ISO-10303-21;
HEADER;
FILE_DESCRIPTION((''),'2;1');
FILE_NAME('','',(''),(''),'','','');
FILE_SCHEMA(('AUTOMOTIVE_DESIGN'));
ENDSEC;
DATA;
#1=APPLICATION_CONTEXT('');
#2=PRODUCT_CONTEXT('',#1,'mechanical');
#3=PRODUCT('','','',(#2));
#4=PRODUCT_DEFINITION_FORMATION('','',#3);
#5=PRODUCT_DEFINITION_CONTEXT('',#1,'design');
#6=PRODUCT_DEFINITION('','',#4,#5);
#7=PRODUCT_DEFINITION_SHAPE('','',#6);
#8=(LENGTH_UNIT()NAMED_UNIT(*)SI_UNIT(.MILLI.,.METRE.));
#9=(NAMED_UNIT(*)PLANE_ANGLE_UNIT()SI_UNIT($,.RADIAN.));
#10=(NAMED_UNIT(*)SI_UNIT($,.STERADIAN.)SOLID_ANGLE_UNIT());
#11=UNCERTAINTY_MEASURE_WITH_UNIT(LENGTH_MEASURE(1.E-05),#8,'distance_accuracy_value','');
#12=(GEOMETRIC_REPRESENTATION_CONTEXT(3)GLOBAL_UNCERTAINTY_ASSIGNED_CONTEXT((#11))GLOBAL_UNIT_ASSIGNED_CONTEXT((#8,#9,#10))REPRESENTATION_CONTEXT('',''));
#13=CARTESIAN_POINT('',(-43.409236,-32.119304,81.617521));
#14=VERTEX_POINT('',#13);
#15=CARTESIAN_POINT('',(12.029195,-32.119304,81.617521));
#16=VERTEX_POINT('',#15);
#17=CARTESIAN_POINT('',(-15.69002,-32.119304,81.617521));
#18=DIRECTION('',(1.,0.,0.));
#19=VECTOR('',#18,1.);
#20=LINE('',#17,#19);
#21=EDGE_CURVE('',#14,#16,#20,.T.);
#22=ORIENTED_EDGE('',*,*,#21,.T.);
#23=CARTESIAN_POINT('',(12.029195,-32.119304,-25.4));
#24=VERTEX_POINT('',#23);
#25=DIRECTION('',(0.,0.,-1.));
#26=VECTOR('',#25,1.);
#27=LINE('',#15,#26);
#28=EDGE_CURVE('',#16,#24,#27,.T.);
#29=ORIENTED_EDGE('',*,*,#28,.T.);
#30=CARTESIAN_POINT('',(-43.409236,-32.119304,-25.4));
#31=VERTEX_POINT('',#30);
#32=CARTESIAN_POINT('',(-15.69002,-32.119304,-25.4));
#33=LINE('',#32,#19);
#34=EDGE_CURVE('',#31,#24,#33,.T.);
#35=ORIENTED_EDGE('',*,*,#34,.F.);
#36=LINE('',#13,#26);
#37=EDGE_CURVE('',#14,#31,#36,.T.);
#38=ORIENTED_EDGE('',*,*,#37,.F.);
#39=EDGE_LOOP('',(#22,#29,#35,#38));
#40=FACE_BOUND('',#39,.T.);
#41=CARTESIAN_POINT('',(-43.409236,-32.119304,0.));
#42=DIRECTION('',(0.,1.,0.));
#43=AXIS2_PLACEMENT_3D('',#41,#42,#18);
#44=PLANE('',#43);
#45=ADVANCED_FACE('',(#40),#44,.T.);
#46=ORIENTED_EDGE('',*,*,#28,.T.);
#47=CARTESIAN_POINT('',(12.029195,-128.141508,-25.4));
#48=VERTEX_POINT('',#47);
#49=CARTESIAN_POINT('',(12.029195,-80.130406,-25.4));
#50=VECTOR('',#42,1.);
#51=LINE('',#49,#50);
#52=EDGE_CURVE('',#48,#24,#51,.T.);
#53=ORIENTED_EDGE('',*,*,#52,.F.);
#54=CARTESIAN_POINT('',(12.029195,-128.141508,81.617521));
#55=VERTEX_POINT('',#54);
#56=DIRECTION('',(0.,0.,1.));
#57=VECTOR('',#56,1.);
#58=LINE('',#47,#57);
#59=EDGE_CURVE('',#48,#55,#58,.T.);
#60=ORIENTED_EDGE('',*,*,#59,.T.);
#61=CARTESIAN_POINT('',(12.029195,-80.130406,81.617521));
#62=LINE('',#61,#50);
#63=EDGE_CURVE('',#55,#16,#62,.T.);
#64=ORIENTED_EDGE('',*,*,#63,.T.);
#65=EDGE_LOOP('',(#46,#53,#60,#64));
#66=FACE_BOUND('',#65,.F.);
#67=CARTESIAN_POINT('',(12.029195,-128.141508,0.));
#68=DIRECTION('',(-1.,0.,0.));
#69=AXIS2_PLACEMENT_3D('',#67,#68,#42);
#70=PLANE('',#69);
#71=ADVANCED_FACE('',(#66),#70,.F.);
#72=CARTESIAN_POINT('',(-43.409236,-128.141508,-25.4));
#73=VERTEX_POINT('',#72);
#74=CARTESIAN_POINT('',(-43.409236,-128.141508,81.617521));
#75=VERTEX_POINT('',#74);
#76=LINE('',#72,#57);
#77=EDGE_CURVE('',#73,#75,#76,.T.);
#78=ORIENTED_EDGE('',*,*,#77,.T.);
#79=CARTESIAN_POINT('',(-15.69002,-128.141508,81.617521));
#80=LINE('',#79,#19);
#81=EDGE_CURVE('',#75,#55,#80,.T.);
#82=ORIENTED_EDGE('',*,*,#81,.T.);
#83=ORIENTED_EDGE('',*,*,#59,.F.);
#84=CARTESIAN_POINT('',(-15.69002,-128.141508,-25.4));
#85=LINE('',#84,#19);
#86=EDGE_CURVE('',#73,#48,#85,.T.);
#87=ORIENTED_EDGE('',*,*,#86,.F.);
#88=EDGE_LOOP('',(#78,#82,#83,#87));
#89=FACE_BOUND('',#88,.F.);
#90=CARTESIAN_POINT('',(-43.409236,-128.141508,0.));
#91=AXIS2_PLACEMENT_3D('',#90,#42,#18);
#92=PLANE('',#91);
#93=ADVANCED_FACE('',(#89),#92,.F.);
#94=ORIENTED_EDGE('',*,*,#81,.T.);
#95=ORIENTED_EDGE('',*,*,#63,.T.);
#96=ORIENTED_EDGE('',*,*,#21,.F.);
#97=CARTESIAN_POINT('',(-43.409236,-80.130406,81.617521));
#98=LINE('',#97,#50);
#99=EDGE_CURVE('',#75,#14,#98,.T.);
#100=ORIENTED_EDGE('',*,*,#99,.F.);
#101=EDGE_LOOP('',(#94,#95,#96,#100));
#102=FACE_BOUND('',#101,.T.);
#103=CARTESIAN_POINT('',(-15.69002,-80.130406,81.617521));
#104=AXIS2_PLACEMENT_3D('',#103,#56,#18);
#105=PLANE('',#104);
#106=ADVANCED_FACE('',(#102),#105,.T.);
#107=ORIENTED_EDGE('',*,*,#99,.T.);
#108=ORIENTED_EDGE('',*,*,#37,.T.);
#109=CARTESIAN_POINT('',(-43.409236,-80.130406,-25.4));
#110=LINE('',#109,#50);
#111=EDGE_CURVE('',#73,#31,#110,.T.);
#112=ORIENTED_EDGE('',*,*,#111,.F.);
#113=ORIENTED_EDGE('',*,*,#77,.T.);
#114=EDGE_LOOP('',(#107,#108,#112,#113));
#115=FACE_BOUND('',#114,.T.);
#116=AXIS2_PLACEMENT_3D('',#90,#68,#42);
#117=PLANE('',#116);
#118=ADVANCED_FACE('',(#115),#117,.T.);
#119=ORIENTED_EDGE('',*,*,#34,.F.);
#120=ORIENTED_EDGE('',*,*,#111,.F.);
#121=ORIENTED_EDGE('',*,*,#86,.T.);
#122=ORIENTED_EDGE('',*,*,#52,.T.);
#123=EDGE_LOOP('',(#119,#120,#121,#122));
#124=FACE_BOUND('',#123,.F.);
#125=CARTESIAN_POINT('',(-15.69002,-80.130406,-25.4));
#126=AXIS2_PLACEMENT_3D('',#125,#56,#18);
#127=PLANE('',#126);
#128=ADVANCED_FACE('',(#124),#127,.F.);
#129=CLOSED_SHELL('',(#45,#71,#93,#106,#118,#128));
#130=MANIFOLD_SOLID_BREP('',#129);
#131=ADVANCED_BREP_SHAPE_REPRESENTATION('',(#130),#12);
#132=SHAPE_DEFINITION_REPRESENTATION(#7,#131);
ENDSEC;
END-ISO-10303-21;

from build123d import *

# Parameters (mm, degrees)
F1_W     = 55.4384309798
F1_H     = 96.0222035646
F2_DEPTH = 25.399999693
F3_DEPTH = 81.6175211221


# Not quite as in the source:
# - a feature names something its author has since deleted; it is built from what else it names


with BuildPart() as f2:
    # F1 (on Top) → F2 (new body)
    with BuildSketch(Plane.XY):
        with Locations((-15.6900202855, -80.130405724)):
            Rectangle(F1_W, F1_H)
    extrude(amount=-F2_DEPTH)

    # F3 (add): a face of the model
    f3_faces = [f2.faces().sort_by_distance(p)[0] for p in [
        (-15.6900202855, -80.130405724, 0),
    ]]
    extrude(f3_faces, amount=F3_DEPTH)


solid = f2.part
